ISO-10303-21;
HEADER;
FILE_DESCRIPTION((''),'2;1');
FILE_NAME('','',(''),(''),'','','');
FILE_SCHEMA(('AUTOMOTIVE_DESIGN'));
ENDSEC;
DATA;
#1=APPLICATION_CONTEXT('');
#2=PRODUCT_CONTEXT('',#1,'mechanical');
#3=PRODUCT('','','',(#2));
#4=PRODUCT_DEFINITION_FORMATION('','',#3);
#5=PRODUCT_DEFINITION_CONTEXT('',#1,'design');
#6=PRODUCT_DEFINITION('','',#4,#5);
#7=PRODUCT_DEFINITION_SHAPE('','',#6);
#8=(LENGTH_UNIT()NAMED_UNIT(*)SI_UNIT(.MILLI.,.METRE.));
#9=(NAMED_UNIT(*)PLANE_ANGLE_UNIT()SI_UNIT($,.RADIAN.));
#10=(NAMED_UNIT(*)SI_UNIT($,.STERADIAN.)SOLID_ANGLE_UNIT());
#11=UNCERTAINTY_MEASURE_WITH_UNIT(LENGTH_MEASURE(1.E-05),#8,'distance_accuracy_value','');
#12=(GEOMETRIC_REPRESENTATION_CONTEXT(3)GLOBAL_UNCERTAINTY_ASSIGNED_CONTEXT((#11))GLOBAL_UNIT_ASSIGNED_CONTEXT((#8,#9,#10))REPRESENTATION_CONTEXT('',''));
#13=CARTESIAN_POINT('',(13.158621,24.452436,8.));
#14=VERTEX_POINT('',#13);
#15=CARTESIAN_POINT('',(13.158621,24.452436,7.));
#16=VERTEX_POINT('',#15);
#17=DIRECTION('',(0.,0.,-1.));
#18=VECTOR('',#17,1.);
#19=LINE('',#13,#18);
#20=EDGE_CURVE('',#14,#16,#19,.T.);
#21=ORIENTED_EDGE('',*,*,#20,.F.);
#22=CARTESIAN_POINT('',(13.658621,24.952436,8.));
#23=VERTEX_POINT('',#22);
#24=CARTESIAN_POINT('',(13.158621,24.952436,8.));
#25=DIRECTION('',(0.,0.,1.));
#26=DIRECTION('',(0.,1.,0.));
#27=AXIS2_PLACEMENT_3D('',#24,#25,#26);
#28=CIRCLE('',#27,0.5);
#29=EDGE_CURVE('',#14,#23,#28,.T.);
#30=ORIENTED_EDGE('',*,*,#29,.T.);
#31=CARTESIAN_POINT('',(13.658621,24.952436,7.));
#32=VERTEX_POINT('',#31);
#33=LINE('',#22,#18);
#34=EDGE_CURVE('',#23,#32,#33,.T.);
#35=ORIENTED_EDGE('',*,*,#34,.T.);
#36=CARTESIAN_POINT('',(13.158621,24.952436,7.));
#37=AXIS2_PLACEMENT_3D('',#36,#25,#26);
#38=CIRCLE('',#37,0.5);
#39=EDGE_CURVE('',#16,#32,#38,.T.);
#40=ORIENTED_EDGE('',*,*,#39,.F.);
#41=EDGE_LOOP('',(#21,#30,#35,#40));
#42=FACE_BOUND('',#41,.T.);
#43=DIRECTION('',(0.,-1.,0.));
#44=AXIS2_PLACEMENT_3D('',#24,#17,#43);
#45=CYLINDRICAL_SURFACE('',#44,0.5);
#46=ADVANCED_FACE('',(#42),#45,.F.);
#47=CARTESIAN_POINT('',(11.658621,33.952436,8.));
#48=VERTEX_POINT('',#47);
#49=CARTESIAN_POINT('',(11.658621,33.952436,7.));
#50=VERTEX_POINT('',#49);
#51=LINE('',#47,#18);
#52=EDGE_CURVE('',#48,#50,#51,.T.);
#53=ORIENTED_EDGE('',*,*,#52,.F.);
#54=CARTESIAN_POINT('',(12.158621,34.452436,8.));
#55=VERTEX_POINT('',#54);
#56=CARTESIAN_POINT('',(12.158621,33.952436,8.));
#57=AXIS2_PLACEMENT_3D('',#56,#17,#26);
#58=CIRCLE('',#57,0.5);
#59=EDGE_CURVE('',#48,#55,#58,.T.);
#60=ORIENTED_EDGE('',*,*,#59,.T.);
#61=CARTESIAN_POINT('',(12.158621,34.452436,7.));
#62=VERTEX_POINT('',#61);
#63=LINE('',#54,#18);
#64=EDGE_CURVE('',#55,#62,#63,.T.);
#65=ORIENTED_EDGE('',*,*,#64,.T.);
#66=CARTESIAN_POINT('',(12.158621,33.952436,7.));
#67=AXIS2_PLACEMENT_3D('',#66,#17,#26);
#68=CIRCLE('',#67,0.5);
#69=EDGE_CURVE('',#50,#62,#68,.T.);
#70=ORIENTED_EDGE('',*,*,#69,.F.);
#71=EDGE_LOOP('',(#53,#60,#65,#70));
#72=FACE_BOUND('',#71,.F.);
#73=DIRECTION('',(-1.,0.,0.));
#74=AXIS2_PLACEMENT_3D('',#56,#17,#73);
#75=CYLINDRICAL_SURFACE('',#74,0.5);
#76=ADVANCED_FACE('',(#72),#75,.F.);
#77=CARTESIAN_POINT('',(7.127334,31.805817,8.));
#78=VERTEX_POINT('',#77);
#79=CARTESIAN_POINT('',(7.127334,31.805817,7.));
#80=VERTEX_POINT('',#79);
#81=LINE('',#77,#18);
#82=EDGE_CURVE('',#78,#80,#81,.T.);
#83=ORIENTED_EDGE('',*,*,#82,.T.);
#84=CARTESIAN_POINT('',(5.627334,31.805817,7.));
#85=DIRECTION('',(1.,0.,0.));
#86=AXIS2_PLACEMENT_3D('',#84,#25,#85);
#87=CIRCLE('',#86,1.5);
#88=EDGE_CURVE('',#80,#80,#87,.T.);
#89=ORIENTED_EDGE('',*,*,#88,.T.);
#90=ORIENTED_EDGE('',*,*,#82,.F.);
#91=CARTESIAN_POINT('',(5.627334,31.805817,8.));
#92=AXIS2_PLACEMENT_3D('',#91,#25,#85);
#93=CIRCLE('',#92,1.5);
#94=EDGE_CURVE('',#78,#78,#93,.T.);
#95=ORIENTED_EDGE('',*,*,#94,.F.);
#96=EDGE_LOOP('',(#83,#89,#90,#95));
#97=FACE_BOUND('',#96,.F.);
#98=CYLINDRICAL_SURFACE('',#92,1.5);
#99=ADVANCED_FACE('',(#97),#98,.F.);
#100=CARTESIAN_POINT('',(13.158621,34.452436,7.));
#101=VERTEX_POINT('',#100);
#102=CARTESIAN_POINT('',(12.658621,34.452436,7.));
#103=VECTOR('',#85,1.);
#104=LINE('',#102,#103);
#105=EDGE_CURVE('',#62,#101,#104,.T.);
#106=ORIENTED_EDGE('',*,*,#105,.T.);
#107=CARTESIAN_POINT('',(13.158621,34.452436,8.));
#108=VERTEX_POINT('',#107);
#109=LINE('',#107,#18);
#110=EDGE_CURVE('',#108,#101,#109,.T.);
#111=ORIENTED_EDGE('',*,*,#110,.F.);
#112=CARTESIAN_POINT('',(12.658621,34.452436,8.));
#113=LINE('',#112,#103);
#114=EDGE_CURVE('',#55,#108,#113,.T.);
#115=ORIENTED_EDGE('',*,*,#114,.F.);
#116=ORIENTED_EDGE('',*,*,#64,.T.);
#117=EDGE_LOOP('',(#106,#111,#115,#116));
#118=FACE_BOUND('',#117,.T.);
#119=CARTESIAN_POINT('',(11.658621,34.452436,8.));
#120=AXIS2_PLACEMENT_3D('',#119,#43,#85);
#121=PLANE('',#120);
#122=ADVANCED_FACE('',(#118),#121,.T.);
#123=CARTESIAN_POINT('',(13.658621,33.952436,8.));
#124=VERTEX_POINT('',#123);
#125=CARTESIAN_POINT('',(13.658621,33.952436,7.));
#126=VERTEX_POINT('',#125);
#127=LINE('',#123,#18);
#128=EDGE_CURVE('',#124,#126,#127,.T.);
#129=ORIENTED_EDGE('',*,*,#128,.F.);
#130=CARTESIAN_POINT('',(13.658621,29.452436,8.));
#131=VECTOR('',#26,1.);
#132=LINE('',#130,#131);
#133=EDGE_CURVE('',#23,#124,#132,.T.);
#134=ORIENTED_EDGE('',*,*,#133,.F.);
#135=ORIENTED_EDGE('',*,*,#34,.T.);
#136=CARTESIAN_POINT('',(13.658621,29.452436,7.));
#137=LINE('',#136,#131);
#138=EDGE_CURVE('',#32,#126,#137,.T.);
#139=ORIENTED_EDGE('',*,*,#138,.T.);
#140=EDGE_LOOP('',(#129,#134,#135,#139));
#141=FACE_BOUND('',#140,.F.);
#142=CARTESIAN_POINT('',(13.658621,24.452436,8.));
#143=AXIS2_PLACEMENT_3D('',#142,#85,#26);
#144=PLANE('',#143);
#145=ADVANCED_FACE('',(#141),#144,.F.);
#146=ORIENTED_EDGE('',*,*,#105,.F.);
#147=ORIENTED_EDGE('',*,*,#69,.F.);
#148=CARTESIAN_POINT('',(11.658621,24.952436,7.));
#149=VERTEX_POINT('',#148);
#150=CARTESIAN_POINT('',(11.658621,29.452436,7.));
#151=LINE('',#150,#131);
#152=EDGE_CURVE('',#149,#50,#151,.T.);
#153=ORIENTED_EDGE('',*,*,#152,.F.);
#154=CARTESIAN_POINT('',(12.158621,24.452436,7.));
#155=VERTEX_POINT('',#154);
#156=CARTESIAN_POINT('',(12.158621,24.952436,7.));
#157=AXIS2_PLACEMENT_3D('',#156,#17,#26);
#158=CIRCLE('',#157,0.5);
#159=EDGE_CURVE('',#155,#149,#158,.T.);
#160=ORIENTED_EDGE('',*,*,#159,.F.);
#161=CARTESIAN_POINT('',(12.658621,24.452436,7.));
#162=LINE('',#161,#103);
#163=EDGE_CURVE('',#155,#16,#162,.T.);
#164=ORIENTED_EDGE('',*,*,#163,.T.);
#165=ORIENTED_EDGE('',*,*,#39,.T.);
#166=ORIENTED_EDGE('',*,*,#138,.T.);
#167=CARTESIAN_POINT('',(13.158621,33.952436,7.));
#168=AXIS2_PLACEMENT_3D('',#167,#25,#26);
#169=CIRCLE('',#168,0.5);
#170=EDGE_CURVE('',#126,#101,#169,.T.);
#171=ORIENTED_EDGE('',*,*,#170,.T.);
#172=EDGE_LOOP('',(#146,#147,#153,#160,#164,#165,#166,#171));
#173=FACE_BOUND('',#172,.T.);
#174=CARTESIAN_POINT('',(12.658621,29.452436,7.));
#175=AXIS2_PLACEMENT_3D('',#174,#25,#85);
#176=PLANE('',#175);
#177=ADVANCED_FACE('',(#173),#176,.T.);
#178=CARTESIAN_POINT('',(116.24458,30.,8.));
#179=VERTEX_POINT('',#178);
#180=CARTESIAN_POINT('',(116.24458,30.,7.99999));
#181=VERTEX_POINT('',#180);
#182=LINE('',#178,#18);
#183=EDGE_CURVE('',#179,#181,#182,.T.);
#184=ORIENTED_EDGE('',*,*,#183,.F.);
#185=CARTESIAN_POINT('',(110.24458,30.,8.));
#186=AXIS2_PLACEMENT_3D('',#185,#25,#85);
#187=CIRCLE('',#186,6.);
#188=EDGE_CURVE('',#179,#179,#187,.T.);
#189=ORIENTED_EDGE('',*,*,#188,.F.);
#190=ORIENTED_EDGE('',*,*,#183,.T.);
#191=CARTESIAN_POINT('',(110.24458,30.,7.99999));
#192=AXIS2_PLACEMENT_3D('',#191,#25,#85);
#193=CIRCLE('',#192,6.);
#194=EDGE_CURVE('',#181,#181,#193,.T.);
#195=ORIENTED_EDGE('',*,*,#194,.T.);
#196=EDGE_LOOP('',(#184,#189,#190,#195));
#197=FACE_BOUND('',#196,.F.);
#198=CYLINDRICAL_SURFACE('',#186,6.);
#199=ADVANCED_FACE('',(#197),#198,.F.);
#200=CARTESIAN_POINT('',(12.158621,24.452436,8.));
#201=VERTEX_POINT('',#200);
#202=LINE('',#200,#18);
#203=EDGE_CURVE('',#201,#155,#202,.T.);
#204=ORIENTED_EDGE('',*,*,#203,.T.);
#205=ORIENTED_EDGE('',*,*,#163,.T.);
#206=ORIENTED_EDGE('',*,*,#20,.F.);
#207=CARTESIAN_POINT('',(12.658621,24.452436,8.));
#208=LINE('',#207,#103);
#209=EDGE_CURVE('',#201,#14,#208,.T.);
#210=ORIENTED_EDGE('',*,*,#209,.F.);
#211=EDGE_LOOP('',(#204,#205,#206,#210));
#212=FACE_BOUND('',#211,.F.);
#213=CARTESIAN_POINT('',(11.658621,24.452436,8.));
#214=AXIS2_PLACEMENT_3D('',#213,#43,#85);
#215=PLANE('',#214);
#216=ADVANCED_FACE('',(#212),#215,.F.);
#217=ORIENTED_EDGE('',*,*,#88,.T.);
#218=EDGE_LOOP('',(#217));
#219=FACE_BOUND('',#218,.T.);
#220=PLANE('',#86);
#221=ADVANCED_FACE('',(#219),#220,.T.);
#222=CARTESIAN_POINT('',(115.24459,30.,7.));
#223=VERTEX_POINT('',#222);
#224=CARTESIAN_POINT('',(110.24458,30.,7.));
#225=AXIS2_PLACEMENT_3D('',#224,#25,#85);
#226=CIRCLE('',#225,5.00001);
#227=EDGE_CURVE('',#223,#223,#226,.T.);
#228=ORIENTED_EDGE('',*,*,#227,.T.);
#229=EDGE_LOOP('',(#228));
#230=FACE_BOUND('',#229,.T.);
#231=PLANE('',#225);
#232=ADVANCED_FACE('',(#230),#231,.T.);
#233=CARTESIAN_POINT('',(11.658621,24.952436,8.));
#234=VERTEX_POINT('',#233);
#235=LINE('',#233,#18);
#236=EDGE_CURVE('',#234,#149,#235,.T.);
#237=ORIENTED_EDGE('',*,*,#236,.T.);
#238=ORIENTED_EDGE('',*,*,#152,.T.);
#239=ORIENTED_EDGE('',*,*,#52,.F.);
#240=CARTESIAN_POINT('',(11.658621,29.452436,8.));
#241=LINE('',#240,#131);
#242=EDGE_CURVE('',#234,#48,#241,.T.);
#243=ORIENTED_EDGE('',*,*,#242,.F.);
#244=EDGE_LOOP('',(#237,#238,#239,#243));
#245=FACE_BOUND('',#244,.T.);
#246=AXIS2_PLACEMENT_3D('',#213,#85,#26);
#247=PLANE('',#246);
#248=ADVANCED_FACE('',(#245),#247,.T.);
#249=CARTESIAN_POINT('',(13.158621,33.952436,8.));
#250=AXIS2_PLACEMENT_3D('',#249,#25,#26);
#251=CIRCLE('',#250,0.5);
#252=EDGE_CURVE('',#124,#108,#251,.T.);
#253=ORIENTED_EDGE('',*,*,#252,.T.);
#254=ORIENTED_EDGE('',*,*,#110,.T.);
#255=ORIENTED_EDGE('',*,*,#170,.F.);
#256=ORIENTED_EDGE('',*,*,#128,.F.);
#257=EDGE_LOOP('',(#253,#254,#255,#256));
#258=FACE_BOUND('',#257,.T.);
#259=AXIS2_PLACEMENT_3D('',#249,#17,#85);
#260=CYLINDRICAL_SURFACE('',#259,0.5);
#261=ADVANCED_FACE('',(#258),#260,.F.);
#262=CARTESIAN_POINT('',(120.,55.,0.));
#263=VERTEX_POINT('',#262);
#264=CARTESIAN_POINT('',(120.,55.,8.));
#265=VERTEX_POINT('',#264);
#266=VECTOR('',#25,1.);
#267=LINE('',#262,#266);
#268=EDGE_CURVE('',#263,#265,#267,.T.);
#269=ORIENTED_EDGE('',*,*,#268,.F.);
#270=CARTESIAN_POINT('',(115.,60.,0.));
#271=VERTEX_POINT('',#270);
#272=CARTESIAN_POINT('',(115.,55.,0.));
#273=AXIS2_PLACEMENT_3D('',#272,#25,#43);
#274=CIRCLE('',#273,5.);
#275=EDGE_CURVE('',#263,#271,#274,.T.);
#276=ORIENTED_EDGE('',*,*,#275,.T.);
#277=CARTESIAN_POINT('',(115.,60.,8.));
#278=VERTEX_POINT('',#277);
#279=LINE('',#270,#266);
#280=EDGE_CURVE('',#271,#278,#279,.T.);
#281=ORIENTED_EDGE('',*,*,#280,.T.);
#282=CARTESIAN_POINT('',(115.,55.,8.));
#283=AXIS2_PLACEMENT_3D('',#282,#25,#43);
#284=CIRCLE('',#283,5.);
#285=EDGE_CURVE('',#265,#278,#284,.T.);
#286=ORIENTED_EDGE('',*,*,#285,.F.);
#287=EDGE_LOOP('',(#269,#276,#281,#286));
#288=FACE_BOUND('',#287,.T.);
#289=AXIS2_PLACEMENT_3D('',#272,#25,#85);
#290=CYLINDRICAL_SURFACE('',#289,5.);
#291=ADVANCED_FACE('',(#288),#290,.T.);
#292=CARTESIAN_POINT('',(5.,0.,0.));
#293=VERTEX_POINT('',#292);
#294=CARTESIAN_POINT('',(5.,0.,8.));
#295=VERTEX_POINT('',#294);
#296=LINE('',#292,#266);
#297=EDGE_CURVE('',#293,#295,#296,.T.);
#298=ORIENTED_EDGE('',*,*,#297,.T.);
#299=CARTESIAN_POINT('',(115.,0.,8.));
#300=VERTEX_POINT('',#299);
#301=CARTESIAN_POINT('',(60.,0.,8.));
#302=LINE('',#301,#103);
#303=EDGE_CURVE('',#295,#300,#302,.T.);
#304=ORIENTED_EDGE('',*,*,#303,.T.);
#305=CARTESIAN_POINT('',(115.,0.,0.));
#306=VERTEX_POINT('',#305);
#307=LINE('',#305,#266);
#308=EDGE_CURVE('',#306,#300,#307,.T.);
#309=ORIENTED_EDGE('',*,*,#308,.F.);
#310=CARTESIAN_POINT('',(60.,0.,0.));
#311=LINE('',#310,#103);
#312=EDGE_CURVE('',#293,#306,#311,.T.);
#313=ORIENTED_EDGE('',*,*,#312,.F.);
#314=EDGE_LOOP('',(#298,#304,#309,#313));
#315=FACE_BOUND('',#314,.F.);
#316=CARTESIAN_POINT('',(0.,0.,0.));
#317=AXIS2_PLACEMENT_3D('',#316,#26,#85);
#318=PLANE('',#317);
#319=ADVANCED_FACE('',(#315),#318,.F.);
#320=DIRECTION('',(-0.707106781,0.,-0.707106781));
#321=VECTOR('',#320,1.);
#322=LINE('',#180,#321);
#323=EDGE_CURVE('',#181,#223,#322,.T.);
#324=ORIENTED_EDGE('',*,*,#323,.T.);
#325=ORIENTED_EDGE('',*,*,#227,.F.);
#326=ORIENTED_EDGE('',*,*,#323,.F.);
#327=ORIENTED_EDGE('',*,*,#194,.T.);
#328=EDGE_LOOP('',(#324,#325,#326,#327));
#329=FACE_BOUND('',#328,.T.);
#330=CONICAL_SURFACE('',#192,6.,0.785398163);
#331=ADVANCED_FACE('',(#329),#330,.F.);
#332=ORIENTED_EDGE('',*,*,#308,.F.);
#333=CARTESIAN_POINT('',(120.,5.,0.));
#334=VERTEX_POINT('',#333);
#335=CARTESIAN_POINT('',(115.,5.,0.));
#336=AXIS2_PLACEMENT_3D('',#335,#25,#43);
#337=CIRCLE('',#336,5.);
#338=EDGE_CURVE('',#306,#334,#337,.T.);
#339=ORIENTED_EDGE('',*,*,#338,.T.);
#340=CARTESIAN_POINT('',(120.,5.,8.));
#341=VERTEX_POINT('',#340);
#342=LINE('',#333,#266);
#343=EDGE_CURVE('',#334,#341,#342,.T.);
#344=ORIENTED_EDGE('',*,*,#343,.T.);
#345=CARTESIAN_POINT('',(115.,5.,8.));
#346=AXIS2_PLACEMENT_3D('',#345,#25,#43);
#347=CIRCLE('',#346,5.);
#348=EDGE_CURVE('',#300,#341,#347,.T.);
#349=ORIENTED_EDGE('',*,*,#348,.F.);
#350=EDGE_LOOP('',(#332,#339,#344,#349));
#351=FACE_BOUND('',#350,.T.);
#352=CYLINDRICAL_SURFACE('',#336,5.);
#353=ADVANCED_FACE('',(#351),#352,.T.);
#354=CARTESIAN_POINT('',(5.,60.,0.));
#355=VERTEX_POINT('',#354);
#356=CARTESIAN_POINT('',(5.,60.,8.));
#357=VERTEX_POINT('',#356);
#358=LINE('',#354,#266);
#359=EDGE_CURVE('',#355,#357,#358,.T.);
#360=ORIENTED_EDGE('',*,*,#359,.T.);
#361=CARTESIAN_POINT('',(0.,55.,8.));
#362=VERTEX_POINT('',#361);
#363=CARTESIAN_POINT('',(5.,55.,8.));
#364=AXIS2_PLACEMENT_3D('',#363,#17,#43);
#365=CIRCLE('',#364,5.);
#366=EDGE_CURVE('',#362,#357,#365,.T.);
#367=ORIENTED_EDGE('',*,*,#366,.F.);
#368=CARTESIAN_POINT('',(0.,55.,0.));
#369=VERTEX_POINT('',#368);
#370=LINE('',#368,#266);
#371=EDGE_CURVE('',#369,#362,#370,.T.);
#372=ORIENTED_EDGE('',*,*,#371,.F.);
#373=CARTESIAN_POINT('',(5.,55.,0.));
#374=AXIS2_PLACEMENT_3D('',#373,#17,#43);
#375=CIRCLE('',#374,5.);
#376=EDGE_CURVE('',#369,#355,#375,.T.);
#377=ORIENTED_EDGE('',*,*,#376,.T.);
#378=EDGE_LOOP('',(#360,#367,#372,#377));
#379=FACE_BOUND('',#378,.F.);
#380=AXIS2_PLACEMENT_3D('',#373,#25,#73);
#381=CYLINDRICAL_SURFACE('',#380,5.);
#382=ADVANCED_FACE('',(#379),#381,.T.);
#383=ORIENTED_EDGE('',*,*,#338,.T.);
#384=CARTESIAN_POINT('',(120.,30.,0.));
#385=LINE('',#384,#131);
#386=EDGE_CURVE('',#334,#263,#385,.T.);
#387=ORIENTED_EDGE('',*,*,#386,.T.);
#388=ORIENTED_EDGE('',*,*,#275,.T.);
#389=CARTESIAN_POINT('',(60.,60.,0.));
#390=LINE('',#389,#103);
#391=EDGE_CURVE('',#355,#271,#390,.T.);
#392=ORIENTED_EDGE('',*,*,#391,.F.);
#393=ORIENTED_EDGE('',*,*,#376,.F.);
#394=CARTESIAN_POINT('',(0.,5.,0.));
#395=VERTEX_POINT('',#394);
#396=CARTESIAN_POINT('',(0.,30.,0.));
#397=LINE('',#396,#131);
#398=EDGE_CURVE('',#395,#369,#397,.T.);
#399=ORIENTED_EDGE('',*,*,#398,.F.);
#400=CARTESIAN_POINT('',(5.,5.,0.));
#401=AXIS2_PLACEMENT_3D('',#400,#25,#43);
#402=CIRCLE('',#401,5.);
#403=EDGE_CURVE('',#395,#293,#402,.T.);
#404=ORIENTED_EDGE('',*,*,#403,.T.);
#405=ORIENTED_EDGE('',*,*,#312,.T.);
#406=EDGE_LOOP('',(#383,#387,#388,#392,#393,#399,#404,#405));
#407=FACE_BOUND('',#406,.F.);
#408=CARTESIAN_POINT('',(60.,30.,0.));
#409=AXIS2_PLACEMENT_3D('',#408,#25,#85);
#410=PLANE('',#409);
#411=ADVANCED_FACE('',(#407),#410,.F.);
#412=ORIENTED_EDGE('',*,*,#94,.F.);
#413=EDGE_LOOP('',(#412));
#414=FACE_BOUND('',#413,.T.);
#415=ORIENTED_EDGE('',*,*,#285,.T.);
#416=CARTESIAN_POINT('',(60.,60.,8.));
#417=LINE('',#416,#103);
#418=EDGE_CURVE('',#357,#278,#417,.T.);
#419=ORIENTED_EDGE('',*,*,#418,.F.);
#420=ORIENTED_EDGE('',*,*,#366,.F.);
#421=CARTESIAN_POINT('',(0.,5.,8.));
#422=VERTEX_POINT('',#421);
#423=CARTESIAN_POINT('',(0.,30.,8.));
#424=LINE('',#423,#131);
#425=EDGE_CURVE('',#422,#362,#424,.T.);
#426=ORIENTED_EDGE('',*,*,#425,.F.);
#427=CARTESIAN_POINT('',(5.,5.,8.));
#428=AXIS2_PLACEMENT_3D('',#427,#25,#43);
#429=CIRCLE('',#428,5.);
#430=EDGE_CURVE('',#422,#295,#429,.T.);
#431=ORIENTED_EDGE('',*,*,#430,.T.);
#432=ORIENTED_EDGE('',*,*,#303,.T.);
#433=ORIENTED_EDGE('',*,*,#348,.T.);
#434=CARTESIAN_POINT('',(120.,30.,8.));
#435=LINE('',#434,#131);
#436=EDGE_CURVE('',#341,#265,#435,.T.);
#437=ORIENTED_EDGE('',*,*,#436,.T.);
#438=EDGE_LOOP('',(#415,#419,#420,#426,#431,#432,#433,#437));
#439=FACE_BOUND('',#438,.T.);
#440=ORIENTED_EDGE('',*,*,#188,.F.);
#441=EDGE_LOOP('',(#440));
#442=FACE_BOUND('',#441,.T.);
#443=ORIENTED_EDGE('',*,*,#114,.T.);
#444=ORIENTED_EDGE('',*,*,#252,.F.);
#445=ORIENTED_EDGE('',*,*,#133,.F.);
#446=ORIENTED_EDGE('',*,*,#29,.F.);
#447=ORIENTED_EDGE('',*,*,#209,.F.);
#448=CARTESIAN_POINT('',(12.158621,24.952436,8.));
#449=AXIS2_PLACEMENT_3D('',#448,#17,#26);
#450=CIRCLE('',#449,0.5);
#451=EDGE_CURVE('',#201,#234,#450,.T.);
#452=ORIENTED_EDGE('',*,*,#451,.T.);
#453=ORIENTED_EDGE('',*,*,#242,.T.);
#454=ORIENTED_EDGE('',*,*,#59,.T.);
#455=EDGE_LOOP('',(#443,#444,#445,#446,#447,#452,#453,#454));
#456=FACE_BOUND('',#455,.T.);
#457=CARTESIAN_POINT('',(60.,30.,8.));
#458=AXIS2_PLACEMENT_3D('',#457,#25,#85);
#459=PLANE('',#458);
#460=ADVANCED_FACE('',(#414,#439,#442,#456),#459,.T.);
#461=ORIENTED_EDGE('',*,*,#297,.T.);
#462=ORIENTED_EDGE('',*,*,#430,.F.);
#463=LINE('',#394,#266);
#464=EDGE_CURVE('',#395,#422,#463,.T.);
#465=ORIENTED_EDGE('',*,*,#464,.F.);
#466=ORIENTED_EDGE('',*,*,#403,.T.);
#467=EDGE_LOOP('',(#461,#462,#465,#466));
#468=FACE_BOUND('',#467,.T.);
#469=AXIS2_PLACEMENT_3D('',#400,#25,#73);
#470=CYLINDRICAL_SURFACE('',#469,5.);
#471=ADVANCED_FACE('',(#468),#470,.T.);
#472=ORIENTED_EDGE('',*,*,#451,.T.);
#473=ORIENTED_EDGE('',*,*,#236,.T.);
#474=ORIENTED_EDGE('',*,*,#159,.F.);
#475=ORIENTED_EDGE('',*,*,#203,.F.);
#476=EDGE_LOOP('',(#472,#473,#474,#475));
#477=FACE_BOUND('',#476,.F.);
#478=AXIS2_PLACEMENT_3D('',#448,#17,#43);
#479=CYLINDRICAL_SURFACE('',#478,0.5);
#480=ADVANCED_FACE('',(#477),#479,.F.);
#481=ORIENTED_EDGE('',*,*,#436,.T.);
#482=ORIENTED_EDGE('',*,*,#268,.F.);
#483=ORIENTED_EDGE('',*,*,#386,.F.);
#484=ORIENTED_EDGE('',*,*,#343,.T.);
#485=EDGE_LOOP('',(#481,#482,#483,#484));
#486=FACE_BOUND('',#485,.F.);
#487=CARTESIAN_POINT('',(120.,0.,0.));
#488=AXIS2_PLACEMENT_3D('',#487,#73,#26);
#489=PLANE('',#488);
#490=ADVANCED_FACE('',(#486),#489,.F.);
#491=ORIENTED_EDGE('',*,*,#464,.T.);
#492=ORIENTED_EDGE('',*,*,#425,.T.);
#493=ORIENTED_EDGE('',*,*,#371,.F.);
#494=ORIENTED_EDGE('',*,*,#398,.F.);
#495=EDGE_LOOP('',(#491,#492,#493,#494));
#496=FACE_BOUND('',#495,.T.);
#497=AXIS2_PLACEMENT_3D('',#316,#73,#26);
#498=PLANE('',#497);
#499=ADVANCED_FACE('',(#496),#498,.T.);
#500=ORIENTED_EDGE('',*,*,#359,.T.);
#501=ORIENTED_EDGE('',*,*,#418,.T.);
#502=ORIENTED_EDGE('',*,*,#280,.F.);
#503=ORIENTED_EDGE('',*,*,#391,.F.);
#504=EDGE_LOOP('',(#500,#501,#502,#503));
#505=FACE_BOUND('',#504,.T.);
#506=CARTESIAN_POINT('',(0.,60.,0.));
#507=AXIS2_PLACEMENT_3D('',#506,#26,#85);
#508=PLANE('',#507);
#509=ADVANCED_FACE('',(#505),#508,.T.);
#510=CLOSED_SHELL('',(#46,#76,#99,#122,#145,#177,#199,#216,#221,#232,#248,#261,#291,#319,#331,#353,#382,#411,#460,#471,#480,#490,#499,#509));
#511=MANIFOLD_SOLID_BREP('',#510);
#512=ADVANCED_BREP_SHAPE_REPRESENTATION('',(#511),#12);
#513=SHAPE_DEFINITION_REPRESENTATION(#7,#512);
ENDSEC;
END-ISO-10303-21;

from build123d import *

# Parameters (mm, degrees)
F0_W      = 120
F0_H      = 60
F1_DEPTH  = 8
F2_R      = 5
F3_R      = 5
F4_R      = 5
F5_R      = 5
F6_W      = 2
F6_H      = 10
F7_DEPTH  = 1
F8_R      = 0.5
F9_R      = 0.5
F10_R     = 1.5
F11_DEPTH = 1
F14_R     = 6
F15_DEPTH = 1
F16_SIZE  = 0.99999


# Not quite as in the source:
# - a fillet or chamfer is up to 0.001 mm smaller than in the source, because OpenCascade refuses the exact size


with BuildPart() as f1:
    # F0 (on Top) → F1 (new body)
    with BuildSketch(Plane.XY):
        with Locations((60, 30)):
            Rectangle(F0_W, F0_H)
    extrude(amount=F1_DEPTH)

    # F2
    f2_edges = [f1.edges().sort_by_distance(p)[0] for p in [
        (0, 60, 4),
    ]]
    fillet(f2_edges, radius=F2_R)

    # F3
    f3_edges = [f1.edges().sort_by_distance(p)[0] for p in [
        (0, 0, 4),
    ]]
    fillet(f3_edges, radius=F3_R)

    # F4
    f4_edges = [f1.edges().sort_by_distance(p)[0] for p in [
        (120, 0, 4),
    ]]
    fillet(f4_edges, radius=F4_R)

    # F5
    f5_edges = [f1.edges().sort_by_distance(p)[0] for p in [
        (120, 60, 4),
    ]]
    fillet(f5_edges, radius=F5_R)

    # F6 (on face) → F7 (cut)
    with BuildSketch(Plane.XY.offset(8)):
        with Locations((12.6586212461, 29.4524356723)):
            Rectangle(F6_W, F6_H)
    extrude(amount=-F7_DEPTH, mode=Mode.SUBTRACT)

    # F8
    f8_edges = [f1.edges().sort_by_distance(p)[0] for p in [
        (11.658621, 24.452436, 7.5),
        (13.658621, 24.452436, 7.5),
    ]]
    fillet(f8_edges, radius=F8_R)

    # F9
    f9_edges = [f1.edges().sort_by_distance(p)[0] for p in [
        (13.658621, 34.452436, 7.5),
        (11.658621, 34.452436, 7.5),
    ]]
    fillet(f9_edges, radius=F9_R)

    # F10 (on face) → F11 (cut)
    with BuildSketch(Plane.XY.offset(8)):
        with Locations((5.6273336522, 31.8058170378)):
            Circle(F10_R)
    extrude(amount=-F11_DEPTH, mode=Mode.SUBTRACT)

    # F14 (on face) → F15 (cut)
    with BuildSketch(Plane.XY.offset(8)):
        with Locations((110.2445796132, 30)):
            Circle(F14_R)
    extrude(amount=-F15_DEPTH, mode=Mode.SUBTRACT)

    # F16 (size 1 in the source; OpenCascade refuses exactly that, so slightly less here)
    f16_edges = [f1.edges().sort_by_distance(p)[0] for p in [
        (104.24458, 30, 7),
    ]]
    chamfer(f16_edges, length=F16_SIZE)


solid = f1.part
